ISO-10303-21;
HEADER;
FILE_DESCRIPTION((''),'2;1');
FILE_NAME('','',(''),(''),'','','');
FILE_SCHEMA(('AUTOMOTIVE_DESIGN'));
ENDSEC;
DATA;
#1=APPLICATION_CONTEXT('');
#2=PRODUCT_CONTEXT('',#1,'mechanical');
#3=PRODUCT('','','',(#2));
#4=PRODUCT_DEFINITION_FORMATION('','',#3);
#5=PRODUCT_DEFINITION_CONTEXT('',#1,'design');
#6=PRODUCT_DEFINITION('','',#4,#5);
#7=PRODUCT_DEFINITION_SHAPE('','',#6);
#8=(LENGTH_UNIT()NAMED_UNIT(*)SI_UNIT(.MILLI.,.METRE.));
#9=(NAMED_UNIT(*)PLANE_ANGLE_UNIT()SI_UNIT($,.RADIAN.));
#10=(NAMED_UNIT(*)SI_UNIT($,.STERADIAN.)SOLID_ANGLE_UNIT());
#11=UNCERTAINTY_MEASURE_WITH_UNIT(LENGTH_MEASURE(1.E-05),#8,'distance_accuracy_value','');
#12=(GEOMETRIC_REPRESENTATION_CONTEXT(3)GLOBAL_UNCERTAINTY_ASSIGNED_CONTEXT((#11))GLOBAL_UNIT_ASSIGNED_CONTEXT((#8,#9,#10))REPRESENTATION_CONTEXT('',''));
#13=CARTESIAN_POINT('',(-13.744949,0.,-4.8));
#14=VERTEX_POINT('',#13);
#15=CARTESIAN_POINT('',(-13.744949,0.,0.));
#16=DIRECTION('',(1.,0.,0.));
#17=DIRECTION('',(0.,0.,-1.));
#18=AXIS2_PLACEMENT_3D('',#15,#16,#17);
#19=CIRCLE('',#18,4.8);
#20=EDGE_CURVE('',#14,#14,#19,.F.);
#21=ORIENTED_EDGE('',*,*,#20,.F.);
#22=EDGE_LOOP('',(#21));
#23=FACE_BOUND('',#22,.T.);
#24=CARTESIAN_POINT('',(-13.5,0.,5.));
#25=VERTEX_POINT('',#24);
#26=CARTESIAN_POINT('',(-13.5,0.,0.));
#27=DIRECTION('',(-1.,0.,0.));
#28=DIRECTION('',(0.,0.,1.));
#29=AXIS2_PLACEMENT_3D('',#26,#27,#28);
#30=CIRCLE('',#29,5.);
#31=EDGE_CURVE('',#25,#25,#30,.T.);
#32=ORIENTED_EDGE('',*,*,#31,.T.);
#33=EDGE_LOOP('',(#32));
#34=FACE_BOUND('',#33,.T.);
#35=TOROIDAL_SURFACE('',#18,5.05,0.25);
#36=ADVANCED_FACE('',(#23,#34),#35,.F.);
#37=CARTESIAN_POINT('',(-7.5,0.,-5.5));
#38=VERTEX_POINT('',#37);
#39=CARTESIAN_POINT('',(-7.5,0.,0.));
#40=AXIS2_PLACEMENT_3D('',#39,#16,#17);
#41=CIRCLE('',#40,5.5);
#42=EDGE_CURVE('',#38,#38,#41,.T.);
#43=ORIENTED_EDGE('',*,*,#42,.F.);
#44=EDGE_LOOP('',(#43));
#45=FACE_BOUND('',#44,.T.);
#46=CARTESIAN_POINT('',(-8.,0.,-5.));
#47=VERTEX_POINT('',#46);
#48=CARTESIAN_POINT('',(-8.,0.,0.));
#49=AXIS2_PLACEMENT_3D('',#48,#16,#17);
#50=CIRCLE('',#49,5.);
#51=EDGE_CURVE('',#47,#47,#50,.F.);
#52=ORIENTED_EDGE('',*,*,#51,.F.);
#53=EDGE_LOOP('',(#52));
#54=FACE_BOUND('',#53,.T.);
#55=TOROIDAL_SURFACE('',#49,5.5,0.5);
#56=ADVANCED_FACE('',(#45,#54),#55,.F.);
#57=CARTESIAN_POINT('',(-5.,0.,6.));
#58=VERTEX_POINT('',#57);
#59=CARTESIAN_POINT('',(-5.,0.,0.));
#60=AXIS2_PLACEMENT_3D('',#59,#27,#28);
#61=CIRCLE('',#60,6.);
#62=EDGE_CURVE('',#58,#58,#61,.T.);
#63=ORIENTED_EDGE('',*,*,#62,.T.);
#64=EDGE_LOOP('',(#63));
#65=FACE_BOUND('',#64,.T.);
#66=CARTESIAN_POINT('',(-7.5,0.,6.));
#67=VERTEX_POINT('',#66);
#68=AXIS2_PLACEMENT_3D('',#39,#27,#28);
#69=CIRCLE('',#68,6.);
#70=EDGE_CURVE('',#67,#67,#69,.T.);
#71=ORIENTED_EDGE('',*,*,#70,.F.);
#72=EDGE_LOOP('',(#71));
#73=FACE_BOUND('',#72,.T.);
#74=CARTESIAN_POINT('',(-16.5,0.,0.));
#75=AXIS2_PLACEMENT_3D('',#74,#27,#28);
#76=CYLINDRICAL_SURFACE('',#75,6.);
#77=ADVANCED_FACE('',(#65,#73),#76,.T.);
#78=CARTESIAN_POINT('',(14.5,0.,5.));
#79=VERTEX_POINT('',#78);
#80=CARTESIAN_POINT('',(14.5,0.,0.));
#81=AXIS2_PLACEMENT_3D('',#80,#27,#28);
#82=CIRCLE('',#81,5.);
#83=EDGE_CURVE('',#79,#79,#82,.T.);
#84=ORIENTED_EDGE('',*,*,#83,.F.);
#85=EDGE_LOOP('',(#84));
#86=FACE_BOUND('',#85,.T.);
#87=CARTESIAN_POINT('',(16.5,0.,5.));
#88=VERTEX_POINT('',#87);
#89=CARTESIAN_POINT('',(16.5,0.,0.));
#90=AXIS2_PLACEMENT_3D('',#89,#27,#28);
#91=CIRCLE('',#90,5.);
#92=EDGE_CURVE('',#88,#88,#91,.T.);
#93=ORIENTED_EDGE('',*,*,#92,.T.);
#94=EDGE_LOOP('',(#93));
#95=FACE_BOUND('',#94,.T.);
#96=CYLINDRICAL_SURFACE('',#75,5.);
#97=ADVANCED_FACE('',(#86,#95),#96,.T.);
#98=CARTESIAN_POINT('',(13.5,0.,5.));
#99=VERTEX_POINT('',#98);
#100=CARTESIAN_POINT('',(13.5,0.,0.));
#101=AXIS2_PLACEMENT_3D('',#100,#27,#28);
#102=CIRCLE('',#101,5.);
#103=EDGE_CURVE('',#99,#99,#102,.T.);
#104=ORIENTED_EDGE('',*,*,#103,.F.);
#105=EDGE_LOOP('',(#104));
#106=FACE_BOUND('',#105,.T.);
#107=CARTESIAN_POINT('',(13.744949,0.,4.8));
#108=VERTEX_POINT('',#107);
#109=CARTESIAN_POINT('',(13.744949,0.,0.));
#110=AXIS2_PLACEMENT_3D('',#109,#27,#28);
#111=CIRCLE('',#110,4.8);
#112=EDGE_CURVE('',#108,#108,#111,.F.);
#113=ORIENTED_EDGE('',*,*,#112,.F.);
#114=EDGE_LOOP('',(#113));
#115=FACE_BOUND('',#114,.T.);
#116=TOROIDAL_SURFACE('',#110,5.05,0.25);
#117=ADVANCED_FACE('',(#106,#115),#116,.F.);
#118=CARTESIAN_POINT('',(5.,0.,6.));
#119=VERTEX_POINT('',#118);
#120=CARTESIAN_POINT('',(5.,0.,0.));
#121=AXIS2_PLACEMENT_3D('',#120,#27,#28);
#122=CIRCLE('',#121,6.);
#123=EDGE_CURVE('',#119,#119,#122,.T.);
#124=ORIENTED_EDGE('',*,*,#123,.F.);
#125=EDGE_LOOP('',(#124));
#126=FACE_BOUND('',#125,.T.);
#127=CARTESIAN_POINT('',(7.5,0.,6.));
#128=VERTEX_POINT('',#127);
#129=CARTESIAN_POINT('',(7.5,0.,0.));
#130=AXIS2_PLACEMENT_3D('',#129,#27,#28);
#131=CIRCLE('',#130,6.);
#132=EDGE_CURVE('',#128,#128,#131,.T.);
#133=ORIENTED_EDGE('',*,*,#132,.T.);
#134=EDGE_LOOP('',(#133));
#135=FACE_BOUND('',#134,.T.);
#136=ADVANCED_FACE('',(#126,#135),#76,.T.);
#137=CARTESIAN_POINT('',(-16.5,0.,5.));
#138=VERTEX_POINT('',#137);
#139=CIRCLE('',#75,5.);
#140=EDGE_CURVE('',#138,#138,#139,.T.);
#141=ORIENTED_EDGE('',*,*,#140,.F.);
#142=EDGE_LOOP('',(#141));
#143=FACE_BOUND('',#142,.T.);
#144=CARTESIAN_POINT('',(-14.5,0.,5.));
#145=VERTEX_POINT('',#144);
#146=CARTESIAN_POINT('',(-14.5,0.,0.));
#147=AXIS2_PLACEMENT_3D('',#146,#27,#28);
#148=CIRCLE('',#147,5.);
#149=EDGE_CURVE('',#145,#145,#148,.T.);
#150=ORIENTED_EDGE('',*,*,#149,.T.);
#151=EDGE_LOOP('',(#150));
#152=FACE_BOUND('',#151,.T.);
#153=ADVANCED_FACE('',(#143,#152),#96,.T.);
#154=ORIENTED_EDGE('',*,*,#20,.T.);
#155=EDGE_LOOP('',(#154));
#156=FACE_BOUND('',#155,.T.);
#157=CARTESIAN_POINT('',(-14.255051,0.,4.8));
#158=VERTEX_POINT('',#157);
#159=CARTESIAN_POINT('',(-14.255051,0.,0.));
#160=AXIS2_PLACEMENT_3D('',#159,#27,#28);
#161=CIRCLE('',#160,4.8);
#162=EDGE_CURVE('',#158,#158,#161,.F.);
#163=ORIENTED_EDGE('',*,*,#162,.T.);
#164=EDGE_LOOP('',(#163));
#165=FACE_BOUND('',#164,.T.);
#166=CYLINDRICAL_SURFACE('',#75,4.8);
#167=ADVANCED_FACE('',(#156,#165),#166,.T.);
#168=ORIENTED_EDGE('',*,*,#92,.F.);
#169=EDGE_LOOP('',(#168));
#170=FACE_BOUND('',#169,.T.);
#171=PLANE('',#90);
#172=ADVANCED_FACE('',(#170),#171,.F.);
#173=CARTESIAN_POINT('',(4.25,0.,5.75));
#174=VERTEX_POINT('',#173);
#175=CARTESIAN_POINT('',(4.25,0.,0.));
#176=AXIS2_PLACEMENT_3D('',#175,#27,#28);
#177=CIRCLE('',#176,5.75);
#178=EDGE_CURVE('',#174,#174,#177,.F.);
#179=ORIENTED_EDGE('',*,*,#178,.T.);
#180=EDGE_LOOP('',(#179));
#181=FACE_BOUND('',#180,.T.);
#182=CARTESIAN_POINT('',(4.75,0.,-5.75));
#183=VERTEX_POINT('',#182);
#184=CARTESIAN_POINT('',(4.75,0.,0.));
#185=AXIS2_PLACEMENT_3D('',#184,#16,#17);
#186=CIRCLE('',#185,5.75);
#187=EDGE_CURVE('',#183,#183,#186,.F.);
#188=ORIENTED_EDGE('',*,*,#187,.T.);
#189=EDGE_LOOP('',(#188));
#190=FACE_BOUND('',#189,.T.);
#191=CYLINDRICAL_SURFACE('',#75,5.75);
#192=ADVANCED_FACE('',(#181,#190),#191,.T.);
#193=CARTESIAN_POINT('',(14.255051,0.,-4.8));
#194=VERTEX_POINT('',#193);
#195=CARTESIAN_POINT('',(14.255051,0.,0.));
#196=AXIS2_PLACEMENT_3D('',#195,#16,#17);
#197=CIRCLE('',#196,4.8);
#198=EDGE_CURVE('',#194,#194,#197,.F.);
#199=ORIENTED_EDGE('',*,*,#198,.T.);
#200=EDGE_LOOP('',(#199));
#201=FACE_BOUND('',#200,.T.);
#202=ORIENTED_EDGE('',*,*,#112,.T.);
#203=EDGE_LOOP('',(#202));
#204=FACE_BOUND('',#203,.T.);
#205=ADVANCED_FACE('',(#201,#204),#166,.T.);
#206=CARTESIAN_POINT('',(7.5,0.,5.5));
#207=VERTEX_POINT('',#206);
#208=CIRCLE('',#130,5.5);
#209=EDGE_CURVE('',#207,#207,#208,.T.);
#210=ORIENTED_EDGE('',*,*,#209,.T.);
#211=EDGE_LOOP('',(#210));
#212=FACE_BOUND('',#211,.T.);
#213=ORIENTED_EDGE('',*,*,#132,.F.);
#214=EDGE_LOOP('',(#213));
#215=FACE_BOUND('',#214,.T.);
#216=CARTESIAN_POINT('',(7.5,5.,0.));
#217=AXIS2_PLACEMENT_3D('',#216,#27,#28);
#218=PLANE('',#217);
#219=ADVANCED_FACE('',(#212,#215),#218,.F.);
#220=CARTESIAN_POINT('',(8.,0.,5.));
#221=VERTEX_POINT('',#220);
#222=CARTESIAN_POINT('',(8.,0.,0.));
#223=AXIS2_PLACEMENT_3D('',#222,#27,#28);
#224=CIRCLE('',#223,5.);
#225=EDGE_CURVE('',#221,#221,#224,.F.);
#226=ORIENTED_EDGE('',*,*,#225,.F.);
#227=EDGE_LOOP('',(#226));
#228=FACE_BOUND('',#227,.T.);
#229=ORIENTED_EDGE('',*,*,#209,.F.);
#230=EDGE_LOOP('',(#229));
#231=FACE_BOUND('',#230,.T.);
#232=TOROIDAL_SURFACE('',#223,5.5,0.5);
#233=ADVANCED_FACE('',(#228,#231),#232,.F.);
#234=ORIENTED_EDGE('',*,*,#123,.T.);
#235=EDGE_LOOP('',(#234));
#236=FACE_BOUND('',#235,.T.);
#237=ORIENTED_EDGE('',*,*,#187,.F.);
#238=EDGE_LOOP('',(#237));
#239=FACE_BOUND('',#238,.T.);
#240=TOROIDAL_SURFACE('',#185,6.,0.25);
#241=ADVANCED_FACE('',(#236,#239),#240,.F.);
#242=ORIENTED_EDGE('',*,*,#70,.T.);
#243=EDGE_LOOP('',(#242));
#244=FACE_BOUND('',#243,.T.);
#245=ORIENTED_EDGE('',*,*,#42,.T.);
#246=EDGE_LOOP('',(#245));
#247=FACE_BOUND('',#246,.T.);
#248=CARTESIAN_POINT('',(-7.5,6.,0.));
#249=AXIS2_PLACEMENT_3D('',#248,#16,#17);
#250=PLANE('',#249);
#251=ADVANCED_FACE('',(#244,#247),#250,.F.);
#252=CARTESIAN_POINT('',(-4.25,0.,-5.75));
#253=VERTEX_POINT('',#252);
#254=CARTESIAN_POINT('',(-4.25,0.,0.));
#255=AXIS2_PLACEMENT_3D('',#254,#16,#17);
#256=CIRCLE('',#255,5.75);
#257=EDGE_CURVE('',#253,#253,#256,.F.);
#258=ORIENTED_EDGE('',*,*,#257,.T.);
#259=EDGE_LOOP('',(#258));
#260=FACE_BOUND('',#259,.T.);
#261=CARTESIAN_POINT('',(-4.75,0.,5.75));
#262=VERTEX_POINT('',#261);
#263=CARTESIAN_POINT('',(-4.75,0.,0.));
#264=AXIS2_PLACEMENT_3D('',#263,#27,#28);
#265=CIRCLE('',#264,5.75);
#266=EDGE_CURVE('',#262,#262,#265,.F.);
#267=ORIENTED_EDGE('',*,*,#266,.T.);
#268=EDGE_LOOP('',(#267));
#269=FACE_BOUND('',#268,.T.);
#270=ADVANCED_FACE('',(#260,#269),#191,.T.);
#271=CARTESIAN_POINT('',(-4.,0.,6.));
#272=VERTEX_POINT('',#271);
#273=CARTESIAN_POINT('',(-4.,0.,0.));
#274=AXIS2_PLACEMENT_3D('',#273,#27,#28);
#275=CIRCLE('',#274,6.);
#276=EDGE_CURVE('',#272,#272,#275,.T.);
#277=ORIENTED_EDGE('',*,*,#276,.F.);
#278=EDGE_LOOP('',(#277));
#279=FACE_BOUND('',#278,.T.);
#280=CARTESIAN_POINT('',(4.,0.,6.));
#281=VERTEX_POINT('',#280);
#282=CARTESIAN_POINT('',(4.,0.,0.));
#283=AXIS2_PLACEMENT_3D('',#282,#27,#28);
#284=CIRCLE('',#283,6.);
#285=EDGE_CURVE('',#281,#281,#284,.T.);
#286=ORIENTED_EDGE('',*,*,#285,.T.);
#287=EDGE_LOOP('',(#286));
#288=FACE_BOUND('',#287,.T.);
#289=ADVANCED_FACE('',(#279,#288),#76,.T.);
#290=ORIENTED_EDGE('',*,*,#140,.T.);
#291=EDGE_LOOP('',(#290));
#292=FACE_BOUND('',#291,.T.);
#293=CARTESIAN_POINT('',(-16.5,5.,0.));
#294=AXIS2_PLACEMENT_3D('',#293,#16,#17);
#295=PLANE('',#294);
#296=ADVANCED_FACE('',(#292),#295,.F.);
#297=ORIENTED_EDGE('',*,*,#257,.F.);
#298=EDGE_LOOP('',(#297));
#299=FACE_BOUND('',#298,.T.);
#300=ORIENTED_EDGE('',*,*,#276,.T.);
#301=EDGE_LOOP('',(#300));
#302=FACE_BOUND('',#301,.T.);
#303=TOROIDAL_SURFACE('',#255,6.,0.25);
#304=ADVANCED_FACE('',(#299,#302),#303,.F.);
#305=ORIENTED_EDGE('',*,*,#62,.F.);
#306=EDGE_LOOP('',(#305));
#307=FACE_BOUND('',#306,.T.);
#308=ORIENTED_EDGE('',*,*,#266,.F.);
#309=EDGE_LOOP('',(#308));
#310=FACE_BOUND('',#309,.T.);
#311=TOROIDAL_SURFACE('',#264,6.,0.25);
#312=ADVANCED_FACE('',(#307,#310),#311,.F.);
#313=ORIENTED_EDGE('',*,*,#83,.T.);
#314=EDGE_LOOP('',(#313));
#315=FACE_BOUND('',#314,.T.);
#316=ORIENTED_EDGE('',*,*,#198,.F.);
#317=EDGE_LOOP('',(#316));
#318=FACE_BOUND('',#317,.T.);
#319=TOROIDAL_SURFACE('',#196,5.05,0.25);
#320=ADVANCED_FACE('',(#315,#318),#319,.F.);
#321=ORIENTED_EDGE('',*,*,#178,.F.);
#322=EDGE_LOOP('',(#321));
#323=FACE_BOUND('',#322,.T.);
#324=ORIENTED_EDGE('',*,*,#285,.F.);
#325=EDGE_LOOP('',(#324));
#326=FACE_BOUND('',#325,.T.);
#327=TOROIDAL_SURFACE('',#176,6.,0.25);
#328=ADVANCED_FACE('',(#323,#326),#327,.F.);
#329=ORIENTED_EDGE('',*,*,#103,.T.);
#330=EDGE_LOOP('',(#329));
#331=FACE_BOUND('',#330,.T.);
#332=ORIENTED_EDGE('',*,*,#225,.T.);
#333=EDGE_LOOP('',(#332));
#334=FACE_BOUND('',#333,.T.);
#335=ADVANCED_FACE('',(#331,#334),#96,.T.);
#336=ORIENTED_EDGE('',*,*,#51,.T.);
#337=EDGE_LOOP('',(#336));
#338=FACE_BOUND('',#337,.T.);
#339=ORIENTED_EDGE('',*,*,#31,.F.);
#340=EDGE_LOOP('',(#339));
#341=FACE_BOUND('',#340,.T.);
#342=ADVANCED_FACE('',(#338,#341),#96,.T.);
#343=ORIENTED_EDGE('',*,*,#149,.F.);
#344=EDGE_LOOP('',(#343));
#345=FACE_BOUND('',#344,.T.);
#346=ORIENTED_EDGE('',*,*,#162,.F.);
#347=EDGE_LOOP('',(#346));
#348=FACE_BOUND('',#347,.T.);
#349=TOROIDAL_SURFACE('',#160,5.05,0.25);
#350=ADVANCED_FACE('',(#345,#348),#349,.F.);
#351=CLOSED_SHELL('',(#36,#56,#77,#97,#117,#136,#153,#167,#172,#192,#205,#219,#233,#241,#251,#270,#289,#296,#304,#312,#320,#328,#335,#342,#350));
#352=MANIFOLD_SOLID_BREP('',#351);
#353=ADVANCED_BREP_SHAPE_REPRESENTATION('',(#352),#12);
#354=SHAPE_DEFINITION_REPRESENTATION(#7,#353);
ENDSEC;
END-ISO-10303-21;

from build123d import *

# Parameters (mm, degrees)
FILLET1_R   = 0.25
FILLET1_R_2 = 0.5


with BuildPart() as part:
    # Sketch1 → Revolve1 (revolve)
    with BuildSketch(Plane.XY, mode=Mode.PRIVATE) as revolve1_sk:
        Polygon((-16.5, 0), (16.5, 0), (16.5, 5), (14.5, 5), (14.5, 4.8), (13.5, 4.8), (13.5, 5), (7.5, 5), (7.5, 6), (5, 6), (5, 5.75), (4, 5.75), (4, 6), (-4, 6), (-4, 5.75), (-5, 5.75), (-5, 6), (-7.5, 6), (-7.5, 5), (-13.5, 5), (-13.5, 4.8), (-14.5, 4.8), (-14.5, 5), (-16.5, 5), align=None)
    revolve(revolve1_sk.sketch.rotate(Axis((-16.5, 0, 0), (1, 0, 0)), 90), axis=Axis((-16.5, 0, 0), (1, 0, 0)))

    # Fillet1
    # the kernel refuses this fillet: 0.5, 0.25 mm, written as the material it adds along each edge
    with BuildSketch(Plane(origin=(-14.5, 0, 0), x_dir=(0, 0, 1), z_dir=(0, 1, 0))) as fillet1_piece_1:
        with BuildLine():
            CenterArc((5.05, 0.244948974), FILLET1_R, 180, 78.463040967)
            Line((5, 0), (4.999, -0.004898979))
            ThreePointArc((4.999, -0.004898979), (4.9, -0.005), (4.8, -0.005))
            Line((4.8, -0.005), (4.795, 0))
            Line((4.795, 0), (4.795, 0.244948974))
            Line((4.795, 0.244948974), (4.8, 0.244948974))
        make_face()
    revolve(axis=Axis((-14.5, 0, 0), (1, 0, 0)))
    with BuildSketch(Plane(origin=(-13.5, 0, 0), x_dir=(0, 0, 1), z_dir=(0, 1, 0))) as fillet1_piece_2:
        with BuildLine():
            CenterArc((5.05, -0.244948974), FILLET1_R, 101.536959033, 78.463040967)
            Line((4.8, -0.244948974), (4.795, -0.244948974))
            Line((4.795, -0.244948974), (4.795, 0))
            Line((4.795, 0), (4.8, 0.005))
            ThreePointArc((4.8, 0.005), (4.9, 0.005), (4.999, 0.004898979))
            Line((4.999, 0.004898979), (5, 0))
        make_face()
    revolve(axis=Axis((-13.5, 0, 0), (1, 0, 0)))
    with BuildSketch(Plane(origin=(13.5, 0, 0), x_dir=(0, 0, 1), z_dir=(0, 1, 0))) as fillet1_piece_3:
        with BuildLine():
            CenterArc((5.05, 0.244948974), FILLET1_R, 180, 78.463040967)
            Line((5, 0), (4.999, -0.004898979))
            ThreePointArc((4.999, -0.004898979), (4.9, -0.005), (4.8, -0.005))
            Line((4.8, -0.005), (4.795, 0))
            Line((4.795, 0), (4.795, 0.244948974))
            Line((4.795, 0.244948974), (4.8, 0.244948974))
        make_face()
    revolve(axis=Axis((13.5, 0, 0), (1, 0, 0)))
    with BuildSketch(Plane(origin=(14.5, 0, 0), x_dir=(0, 0, 1), z_dir=(0, 1, 0))) as fillet1_piece_4:
        with BuildLine():
            CenterArc((5.05, -0.244948974), FILLET1_R, 101.536959033, 78.463040967)
            Line((4.8, -0.244948974), (4.795, -0.244948974))
            Line((4.795, -0.244948974), (4.795, 0))
            Line((4.795, 0), (4.8, 0.005))
            ThreePointArc((4.8, 0.005), (4.9, 0.005), (4.999, 0.004898979))
            Line((4.999, 0.004898979), (5, 0))
        make_face()
    revolve(axis=Axis((14.5, 0, 0), (1, 0, 0)))
    with BuildSketch(Plane(origin=(5, 0, 0), x_dir=(0, 0, 1), z_dir=(0, 1, 0))) as fillet1_piece_5:
        with BuildLine():
            CenterArc((5.75 + FILLET1_R, -FILLET1_R), FILLET1_R, 90, 90)
            Line((5.75, -FILLET1_R), (5.75 - FILLET1_R * 0.02, -FILLET1_R))
            Line((5.75 - FILLET1_R * 0.02, -FILLET1_R), (5.75 - FILLET1_R * 0.02, FILLET1_R * 0.02))
            Line((5.75 - FILLET1_R * 0.02, FILLET1_R * 0.02), (5.75 + FILLET1_R, FILLET1_R * 0.02))
            Line((5.75 + FILLET1_R, FILLET1_R * 0.02), (5.75 + FILLET1_R, 0))
        make_face()
    revolve(axis=Axis((5, 0, 0), (1, 0, 0)))
    with BuildSketch(Plane(origin=(4, 0, 0), x_dir=(0, 0, 1), z_dir=(0, 1, 0))) as fillet1_piece_6:
        with BuildLine():
            CenterArc((5.75 + FILLET1_R, FILLET1_R), FILLET1_R, 180, 90)
            Line((5.75 + FILLET1_R, 0), (5.75 + FILLET1_R, -FILLET1_R * 0.02))
            Line((5.75 + FILLET1_R, -FILLET1_R * 0.02), (5.75 - FILLET1_R * 0.02, -FILLET1_R * 0.02))
            Line((5.75 - FILLET1_R * 0.02, -FILLET1_R * 0.02), (5.75 - FILLET1_R * 0.02, FILLET1_R))
            Line((5.75 - FILLET1_R * 0.02, FILLET1_R), (5.75, FILLET1_R))
        make_face()
    revolve(axis=Axis((4, 0, 0), (1, 0, 0)))
    with BuildSketch(Plane(origin=(-5, 0, 0), x_dir=(0, 0, 1), z_dir=(0, 1, 0))) as fillet1_piece_7:
        with BuildLine():
            CenterArc((5.75 + FILLET1_R, FILLET1_R), FILLET1_R, 180, 90)
            Line((5.75 + FILLET1_R, 0), (5.75 + FILLET1_R, -FILLET1_R * 0.02))
            Line((5.75 + FILLET1_R, -FILLET1_R * 0.02), (5.75 - FILLET1_R * 0.02, -FILLET1_R * 0.02))
            Line((5.75 - FILLET1_R * 0.02, -FILLET1_R * 0.02), (5.75 - FILLET1_R * 0.02, FILLET1_R))
            Line((5.75 - FILLET1_R * 0.02, FILLET1_R), (5.75, FILLET1_R))
        make_face()
    revolve(axis=Axis((-5, 0, 0), (1, 0, 0)))
    with BuildSketch(Plane(origin=(-4, 0, 0), x_dir=(0, 0, 1), z_dir=(0, 1, 0))) as fillet1_piece_8:
        with BuildLine():
            CenterArc((5.75 + FILLET1_R, -FILLET1_R), FILLET1_R, 90, 90)
            Line((5.75, -FILLET1_R), (5.75 - FILLET1_R * 0.02, -FILLET1_R))
            Line((5.75 - FILLET1_R * 0.02, -FILLET1_R), (5.75 - FILLET1_R * 0.02, FILLET1_R * 0.02))
            Line((5.75 - FILLET1_R * 0.02, FILLET1_R * 0.02), (5.75 + FILLET1_R, FILLET1_R * 0.02))
            Line((5.75 + FILLET1_R, FILLET1_R * 0.02), (5.75 + FILLET1_R, 0))
        make_face()
    revolve(axis=Axis((-4, 0, 0), (1, 0, 0)))
    with BuildSketch(Plane(origin=(-7.5, 0, 0), x_dir=(0, 0, 1), z_dir=(0, 1, 0))) as fillet1_piece_9:
        with BuildLine():
            CenterArc((5 + FILLET1_R_2, -FILLET1_R_2), FILLET1_R_2, 90, 90)
            Line((5, -FILLET1_R_2), (5 - FILLET1_R_2 * 0.02, -FILLET1_R_2))
            Line((5 - FILLET1_R_2 * 0.02, -FILLET1_R_2), (5 - FILLET1_R_2 * 0.02, FILLET1_R_2 * 0.02))
            Line((5 - FILLET1_R_2 * 0.02, FILLET1_R_2 * 0.02), (5 + FILLET1_R_2, FILLET1_R_2 * 0.02))
            Line((5 + FILLET1_R_2, FILLET1_R_2 * 0.02), (5 + FILLET1_R_2, 0))
        make_face()
    revolve(axis=Axis((-7.5, 0, 0), (1, 0, 0)))
    with BuildSketch(Plane(origin=(7.5, 0, 0), x_dir=(0, 0, 1), z_dir=(0, 1, 0))) as fillet1_piece_10:
        with BuildLine():
            CenterArc((5 + FILLET1_R_2, FILLET1_R_2), FILLET1_R_2, 180, 90)
            Line((5 + FILLET1_R_2, 0), (5 + FILLET1_R_2, -FILLET1_R_2 * 0.02))
            Line((5 + FILLET1_R_2, -FILLET1_R_2 * 0.02), (5 - FILLET1_R_2 * 0.02, -FILLET1_R_2 * 0.02))
            Line((5 - FILLET1_R_2 * 0.02, -FILLET1_R_2 * 0.02), (5 - FILLET1_R_2 * 0.02, FILLET1_R_2))
            Line((5 - FILLET1_R_2 * 0.02, FILLET1_R_2), (5, FILLET1_R_2))
        make_face()
    revolve(axis=Axis((7.5, 0, 0), (1, 0, 0)))


solid = part.part
